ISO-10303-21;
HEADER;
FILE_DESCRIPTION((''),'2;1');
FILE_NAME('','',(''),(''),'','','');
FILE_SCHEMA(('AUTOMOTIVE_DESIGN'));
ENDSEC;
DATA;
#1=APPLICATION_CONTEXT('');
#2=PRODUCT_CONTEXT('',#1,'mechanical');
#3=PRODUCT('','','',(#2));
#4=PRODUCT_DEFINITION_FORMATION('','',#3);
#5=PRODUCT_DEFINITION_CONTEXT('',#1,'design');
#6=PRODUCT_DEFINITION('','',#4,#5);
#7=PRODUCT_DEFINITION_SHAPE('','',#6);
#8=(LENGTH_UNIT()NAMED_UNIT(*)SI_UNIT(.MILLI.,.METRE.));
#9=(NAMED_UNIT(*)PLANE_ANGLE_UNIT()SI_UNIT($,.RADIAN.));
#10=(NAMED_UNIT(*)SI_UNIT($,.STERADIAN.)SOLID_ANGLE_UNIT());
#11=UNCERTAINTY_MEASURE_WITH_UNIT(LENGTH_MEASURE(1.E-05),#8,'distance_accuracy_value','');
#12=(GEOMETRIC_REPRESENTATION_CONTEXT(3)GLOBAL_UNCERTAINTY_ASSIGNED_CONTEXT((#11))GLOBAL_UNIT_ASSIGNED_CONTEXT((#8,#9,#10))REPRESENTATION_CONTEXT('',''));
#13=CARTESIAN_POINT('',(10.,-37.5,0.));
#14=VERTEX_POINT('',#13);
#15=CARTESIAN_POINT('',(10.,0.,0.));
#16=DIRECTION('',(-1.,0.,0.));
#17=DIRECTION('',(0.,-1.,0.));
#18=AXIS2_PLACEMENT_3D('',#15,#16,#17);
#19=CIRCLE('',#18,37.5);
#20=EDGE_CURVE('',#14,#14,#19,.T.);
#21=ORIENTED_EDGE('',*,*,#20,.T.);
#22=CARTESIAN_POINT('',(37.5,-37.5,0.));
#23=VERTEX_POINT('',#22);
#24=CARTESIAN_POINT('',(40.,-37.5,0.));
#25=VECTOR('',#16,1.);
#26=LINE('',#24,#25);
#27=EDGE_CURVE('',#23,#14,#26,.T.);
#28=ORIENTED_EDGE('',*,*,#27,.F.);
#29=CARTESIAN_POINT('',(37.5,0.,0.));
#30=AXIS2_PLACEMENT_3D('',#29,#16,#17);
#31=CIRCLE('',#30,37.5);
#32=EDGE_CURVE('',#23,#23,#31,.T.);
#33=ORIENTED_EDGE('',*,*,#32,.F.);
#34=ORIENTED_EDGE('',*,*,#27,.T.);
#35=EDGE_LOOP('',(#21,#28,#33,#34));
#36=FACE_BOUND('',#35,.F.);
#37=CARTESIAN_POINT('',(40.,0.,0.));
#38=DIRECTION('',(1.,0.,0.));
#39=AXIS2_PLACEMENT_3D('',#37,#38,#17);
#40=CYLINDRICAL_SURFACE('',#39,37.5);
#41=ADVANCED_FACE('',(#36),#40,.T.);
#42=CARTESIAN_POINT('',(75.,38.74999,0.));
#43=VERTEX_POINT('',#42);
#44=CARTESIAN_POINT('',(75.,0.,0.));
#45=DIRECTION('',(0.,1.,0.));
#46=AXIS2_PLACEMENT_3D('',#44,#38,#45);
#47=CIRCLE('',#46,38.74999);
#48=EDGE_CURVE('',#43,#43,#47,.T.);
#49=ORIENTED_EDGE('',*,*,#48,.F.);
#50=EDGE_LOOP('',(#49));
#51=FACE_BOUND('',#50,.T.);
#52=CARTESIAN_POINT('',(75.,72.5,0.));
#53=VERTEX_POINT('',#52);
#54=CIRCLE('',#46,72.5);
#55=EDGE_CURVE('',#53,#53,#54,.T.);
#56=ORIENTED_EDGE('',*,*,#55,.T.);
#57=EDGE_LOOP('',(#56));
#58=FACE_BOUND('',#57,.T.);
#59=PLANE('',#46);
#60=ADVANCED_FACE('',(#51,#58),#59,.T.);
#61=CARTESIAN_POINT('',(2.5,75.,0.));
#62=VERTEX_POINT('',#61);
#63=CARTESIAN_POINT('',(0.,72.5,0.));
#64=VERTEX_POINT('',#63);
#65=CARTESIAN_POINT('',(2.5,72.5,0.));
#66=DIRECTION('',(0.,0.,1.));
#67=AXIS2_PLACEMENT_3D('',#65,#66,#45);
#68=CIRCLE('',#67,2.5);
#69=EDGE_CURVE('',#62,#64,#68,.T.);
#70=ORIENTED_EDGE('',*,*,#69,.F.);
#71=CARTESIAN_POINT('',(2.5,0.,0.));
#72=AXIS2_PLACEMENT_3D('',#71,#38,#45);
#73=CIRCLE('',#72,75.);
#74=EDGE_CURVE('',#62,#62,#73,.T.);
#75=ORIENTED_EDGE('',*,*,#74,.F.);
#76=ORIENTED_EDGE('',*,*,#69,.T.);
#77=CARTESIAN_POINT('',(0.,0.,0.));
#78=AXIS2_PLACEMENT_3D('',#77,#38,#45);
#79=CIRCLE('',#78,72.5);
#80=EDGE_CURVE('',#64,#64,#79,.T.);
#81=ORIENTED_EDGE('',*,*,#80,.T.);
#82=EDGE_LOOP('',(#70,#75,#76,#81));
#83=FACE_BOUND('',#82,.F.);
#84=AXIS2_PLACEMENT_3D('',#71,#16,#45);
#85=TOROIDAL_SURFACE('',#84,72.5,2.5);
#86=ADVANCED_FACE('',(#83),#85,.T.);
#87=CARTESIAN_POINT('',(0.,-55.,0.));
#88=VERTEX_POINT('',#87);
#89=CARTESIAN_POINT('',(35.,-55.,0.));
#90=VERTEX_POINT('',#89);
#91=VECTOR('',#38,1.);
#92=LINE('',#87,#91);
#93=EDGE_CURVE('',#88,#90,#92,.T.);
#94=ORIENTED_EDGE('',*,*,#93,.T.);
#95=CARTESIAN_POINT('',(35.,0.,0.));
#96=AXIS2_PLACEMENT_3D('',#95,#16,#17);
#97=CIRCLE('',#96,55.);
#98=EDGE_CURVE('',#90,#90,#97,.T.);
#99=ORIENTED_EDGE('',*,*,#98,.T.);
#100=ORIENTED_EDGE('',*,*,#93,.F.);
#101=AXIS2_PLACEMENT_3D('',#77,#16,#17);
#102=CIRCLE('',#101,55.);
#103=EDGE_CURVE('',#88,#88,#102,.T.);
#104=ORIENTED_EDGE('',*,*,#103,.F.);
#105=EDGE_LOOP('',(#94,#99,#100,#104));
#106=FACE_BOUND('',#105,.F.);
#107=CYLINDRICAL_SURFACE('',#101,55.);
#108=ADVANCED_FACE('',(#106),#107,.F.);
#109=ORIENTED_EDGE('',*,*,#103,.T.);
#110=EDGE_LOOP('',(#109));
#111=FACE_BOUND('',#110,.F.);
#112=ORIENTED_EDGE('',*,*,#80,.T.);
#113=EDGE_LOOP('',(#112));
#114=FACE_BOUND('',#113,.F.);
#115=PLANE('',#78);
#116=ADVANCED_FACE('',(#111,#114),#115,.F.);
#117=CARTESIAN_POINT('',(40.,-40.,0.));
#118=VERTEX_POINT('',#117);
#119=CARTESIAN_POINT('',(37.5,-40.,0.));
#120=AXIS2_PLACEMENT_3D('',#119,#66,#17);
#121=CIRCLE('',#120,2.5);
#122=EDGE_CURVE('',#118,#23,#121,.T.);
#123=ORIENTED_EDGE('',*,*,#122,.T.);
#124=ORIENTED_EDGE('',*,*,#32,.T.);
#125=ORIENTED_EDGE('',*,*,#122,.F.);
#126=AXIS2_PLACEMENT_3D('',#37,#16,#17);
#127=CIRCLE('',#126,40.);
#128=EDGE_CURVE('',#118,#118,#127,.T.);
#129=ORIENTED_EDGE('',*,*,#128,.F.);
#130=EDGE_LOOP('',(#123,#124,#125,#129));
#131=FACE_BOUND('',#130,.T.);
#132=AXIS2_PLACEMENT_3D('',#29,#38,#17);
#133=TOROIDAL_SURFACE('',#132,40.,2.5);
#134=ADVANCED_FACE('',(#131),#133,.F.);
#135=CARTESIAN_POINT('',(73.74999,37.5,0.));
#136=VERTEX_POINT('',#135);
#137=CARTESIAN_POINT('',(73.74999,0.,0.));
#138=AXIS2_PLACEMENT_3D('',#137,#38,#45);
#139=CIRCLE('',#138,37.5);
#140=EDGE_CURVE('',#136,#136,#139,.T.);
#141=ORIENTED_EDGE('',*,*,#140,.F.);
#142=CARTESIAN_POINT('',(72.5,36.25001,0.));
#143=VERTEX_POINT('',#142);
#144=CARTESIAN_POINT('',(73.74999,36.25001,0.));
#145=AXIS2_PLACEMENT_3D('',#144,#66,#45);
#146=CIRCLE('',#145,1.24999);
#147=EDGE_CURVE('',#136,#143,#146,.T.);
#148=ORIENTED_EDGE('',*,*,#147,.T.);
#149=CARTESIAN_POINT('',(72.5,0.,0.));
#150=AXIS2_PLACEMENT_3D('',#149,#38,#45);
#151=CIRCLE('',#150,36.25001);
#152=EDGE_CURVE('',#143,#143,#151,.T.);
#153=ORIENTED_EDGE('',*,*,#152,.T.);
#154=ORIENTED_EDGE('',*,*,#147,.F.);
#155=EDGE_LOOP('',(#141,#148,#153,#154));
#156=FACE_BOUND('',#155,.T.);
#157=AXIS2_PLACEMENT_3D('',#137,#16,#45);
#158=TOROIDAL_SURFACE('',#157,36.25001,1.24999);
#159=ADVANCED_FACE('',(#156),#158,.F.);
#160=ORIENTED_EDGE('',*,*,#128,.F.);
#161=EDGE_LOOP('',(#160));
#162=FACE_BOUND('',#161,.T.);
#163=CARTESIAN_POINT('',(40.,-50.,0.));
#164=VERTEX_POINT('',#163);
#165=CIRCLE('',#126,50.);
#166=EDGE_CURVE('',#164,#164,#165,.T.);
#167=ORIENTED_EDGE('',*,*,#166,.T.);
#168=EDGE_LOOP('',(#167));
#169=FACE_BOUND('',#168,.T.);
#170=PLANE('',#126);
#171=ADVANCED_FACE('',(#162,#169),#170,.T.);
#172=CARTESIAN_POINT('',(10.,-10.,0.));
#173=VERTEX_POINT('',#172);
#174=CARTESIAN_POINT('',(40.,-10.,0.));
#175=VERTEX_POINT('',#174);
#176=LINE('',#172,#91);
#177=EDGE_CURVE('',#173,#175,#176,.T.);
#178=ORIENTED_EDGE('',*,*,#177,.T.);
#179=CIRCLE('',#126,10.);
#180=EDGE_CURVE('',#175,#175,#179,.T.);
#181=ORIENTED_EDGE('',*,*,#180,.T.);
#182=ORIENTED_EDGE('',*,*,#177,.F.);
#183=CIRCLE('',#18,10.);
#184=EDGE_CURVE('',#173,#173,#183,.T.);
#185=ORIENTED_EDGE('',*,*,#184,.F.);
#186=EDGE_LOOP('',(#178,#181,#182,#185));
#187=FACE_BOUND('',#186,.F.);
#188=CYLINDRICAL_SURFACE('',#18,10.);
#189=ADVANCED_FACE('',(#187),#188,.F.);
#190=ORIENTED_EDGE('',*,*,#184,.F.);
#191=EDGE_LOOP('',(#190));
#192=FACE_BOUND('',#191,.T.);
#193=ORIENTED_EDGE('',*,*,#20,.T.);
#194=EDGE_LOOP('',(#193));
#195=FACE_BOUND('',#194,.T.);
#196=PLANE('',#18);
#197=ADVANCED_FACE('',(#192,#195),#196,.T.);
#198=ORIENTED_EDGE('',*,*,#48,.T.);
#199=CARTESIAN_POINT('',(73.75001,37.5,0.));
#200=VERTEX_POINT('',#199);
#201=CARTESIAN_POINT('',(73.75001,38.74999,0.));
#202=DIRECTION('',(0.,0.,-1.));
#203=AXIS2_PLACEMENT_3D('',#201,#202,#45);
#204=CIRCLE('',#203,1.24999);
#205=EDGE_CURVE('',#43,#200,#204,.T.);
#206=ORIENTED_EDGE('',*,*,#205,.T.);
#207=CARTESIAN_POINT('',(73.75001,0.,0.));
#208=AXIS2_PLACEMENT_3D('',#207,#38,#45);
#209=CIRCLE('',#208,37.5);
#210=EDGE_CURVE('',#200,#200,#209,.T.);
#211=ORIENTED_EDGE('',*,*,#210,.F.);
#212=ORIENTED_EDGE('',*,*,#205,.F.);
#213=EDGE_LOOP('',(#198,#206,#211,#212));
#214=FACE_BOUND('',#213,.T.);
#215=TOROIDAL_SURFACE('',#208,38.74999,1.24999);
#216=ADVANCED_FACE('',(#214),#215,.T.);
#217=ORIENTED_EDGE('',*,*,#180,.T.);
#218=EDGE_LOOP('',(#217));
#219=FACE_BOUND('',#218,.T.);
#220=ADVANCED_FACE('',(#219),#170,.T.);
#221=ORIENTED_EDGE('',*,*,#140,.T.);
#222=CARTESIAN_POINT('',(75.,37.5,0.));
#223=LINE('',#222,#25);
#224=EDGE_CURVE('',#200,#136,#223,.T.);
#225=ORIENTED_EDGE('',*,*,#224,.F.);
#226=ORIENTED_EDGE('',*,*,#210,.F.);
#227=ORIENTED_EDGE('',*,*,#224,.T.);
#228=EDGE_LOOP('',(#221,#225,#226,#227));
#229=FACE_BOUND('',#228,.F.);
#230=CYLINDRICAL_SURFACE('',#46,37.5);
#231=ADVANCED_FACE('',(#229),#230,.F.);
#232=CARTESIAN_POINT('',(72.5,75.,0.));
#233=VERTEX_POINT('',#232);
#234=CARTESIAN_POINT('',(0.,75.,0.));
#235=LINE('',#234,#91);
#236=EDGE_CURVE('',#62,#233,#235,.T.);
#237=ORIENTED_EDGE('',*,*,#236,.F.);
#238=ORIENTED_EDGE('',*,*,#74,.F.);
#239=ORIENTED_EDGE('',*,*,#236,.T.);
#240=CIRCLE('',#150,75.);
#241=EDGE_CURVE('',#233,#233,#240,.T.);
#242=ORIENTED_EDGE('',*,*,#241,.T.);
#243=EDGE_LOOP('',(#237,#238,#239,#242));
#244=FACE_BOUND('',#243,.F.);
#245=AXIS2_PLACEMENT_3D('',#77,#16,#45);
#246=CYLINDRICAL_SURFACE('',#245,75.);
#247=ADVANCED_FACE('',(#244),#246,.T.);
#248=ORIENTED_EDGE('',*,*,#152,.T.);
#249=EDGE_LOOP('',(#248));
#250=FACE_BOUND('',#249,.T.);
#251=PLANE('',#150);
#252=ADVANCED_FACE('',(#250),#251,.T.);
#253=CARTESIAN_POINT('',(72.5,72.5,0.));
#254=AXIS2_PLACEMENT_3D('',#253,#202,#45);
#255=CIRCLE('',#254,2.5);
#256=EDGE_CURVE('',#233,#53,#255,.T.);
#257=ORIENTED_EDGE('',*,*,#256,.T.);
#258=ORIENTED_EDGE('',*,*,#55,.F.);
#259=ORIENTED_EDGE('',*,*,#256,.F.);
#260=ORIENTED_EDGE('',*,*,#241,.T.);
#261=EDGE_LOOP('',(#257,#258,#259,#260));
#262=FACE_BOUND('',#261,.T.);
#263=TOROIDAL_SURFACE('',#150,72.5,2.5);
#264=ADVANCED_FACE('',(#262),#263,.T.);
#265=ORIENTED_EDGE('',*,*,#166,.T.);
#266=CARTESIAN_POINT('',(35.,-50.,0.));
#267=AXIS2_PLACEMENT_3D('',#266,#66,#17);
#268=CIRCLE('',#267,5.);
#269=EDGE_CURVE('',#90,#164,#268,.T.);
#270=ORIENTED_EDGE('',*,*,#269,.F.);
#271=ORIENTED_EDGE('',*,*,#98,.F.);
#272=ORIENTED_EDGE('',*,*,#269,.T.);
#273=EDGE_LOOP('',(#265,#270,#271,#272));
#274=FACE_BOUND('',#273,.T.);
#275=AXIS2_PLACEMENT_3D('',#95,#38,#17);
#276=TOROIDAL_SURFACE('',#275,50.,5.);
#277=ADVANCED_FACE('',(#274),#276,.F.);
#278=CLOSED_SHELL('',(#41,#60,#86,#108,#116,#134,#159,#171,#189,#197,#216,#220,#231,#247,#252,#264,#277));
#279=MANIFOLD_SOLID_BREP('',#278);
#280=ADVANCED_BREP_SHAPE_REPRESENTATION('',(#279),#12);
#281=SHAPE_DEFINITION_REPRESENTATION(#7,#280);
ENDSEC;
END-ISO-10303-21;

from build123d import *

# Parameters (mm, degrees)
F0_R      = 75
F1_DEPTH  = 75
F2_R      = 55
F3_DEPTH  = 40
F4_R      = 37.5
F5_DEPTH  = 30
F6_R      = 10
F7_DEPTH  = 30
F8_R      = 2.5
F9_R      = 37.5
F10_DEPTH = 2.5
F11_R     = 1.24999
F12_R     = 5


# Not quite as in the source:
# - a fillet or chamfer is up to 0.001 mm smaller than in the source, because OpenCascade refuses the exact size


with BuildPart() as f1:
    # F0 (on Right) → F1 (new body)
    with BuildSketch(Plane.YZ):
        Circle(F0_R)
    extrude(amount=F1_DEPTH)

    # F2 (on face) → F3 (cut)
    with BuildSketch(Plane(origin=(0, 0, 0), x_dir=(0, -1, 0), z_dir=(-1, 0, 0))):
        Circle(F2_R)
    extrude(amount=-F3_DEPTH, mode=Mode.SUBTRACT)

    # F4 (on face) → F5 (join)
    with BuildSketch(Plane(origin=(40, 0, 0), x_dir=(0, -1, 0), z_dir=(-1, 0, 0))):
        Circle(F4_R)
    extrude(amount=F5_DEPTH)

    # F6 (on face) → F7 (cut)
    with BuildSketch(Plane(origin=(10, 0, 0), x_dir=(0, -1, 0), z_dir=(-1, 0, 0))):
        Circle(F6_R)
    extrude(amount=-F7_DEPTH, mode=Mode.SUBTRACT)

    # F8
    f8_edges = [f1.edges().sort_by_distance(p)[0] for p in [
        (40, 37.5, 0),
        (37.5, 75, 0),
        (0, -75, 0),
        (75, -75, 0),
    ]]
    fillet(f8_edges, radius=F8_R)

    # F9 (on face) → F10 (cut)
    with BuildSketch(Plane.YZ.offset(75)):
        Circle(F9_R)
    extrude(amount=-F10_DEPTH, mode=Mode.SUBTRACT)

    # F11 (radius 1.25 in the source; OpenCascade refuses exactly that, so slightly less here)
    f11_edges = [f1.edges().sort_by_distance(p)[0] for p in [
        (72.5, -37.5, 0),
        (75, -37.5, 0),
    ]]
    fillet(f11_edges, radius=F11_R)

    # F12
    f12_edges = [f1.edges().sort_by_distance(p)[0] for p in [
        (40, 55, 0),
    ]]
    fillet(f12_edges, radius=F12_R)


solid = f1.part
